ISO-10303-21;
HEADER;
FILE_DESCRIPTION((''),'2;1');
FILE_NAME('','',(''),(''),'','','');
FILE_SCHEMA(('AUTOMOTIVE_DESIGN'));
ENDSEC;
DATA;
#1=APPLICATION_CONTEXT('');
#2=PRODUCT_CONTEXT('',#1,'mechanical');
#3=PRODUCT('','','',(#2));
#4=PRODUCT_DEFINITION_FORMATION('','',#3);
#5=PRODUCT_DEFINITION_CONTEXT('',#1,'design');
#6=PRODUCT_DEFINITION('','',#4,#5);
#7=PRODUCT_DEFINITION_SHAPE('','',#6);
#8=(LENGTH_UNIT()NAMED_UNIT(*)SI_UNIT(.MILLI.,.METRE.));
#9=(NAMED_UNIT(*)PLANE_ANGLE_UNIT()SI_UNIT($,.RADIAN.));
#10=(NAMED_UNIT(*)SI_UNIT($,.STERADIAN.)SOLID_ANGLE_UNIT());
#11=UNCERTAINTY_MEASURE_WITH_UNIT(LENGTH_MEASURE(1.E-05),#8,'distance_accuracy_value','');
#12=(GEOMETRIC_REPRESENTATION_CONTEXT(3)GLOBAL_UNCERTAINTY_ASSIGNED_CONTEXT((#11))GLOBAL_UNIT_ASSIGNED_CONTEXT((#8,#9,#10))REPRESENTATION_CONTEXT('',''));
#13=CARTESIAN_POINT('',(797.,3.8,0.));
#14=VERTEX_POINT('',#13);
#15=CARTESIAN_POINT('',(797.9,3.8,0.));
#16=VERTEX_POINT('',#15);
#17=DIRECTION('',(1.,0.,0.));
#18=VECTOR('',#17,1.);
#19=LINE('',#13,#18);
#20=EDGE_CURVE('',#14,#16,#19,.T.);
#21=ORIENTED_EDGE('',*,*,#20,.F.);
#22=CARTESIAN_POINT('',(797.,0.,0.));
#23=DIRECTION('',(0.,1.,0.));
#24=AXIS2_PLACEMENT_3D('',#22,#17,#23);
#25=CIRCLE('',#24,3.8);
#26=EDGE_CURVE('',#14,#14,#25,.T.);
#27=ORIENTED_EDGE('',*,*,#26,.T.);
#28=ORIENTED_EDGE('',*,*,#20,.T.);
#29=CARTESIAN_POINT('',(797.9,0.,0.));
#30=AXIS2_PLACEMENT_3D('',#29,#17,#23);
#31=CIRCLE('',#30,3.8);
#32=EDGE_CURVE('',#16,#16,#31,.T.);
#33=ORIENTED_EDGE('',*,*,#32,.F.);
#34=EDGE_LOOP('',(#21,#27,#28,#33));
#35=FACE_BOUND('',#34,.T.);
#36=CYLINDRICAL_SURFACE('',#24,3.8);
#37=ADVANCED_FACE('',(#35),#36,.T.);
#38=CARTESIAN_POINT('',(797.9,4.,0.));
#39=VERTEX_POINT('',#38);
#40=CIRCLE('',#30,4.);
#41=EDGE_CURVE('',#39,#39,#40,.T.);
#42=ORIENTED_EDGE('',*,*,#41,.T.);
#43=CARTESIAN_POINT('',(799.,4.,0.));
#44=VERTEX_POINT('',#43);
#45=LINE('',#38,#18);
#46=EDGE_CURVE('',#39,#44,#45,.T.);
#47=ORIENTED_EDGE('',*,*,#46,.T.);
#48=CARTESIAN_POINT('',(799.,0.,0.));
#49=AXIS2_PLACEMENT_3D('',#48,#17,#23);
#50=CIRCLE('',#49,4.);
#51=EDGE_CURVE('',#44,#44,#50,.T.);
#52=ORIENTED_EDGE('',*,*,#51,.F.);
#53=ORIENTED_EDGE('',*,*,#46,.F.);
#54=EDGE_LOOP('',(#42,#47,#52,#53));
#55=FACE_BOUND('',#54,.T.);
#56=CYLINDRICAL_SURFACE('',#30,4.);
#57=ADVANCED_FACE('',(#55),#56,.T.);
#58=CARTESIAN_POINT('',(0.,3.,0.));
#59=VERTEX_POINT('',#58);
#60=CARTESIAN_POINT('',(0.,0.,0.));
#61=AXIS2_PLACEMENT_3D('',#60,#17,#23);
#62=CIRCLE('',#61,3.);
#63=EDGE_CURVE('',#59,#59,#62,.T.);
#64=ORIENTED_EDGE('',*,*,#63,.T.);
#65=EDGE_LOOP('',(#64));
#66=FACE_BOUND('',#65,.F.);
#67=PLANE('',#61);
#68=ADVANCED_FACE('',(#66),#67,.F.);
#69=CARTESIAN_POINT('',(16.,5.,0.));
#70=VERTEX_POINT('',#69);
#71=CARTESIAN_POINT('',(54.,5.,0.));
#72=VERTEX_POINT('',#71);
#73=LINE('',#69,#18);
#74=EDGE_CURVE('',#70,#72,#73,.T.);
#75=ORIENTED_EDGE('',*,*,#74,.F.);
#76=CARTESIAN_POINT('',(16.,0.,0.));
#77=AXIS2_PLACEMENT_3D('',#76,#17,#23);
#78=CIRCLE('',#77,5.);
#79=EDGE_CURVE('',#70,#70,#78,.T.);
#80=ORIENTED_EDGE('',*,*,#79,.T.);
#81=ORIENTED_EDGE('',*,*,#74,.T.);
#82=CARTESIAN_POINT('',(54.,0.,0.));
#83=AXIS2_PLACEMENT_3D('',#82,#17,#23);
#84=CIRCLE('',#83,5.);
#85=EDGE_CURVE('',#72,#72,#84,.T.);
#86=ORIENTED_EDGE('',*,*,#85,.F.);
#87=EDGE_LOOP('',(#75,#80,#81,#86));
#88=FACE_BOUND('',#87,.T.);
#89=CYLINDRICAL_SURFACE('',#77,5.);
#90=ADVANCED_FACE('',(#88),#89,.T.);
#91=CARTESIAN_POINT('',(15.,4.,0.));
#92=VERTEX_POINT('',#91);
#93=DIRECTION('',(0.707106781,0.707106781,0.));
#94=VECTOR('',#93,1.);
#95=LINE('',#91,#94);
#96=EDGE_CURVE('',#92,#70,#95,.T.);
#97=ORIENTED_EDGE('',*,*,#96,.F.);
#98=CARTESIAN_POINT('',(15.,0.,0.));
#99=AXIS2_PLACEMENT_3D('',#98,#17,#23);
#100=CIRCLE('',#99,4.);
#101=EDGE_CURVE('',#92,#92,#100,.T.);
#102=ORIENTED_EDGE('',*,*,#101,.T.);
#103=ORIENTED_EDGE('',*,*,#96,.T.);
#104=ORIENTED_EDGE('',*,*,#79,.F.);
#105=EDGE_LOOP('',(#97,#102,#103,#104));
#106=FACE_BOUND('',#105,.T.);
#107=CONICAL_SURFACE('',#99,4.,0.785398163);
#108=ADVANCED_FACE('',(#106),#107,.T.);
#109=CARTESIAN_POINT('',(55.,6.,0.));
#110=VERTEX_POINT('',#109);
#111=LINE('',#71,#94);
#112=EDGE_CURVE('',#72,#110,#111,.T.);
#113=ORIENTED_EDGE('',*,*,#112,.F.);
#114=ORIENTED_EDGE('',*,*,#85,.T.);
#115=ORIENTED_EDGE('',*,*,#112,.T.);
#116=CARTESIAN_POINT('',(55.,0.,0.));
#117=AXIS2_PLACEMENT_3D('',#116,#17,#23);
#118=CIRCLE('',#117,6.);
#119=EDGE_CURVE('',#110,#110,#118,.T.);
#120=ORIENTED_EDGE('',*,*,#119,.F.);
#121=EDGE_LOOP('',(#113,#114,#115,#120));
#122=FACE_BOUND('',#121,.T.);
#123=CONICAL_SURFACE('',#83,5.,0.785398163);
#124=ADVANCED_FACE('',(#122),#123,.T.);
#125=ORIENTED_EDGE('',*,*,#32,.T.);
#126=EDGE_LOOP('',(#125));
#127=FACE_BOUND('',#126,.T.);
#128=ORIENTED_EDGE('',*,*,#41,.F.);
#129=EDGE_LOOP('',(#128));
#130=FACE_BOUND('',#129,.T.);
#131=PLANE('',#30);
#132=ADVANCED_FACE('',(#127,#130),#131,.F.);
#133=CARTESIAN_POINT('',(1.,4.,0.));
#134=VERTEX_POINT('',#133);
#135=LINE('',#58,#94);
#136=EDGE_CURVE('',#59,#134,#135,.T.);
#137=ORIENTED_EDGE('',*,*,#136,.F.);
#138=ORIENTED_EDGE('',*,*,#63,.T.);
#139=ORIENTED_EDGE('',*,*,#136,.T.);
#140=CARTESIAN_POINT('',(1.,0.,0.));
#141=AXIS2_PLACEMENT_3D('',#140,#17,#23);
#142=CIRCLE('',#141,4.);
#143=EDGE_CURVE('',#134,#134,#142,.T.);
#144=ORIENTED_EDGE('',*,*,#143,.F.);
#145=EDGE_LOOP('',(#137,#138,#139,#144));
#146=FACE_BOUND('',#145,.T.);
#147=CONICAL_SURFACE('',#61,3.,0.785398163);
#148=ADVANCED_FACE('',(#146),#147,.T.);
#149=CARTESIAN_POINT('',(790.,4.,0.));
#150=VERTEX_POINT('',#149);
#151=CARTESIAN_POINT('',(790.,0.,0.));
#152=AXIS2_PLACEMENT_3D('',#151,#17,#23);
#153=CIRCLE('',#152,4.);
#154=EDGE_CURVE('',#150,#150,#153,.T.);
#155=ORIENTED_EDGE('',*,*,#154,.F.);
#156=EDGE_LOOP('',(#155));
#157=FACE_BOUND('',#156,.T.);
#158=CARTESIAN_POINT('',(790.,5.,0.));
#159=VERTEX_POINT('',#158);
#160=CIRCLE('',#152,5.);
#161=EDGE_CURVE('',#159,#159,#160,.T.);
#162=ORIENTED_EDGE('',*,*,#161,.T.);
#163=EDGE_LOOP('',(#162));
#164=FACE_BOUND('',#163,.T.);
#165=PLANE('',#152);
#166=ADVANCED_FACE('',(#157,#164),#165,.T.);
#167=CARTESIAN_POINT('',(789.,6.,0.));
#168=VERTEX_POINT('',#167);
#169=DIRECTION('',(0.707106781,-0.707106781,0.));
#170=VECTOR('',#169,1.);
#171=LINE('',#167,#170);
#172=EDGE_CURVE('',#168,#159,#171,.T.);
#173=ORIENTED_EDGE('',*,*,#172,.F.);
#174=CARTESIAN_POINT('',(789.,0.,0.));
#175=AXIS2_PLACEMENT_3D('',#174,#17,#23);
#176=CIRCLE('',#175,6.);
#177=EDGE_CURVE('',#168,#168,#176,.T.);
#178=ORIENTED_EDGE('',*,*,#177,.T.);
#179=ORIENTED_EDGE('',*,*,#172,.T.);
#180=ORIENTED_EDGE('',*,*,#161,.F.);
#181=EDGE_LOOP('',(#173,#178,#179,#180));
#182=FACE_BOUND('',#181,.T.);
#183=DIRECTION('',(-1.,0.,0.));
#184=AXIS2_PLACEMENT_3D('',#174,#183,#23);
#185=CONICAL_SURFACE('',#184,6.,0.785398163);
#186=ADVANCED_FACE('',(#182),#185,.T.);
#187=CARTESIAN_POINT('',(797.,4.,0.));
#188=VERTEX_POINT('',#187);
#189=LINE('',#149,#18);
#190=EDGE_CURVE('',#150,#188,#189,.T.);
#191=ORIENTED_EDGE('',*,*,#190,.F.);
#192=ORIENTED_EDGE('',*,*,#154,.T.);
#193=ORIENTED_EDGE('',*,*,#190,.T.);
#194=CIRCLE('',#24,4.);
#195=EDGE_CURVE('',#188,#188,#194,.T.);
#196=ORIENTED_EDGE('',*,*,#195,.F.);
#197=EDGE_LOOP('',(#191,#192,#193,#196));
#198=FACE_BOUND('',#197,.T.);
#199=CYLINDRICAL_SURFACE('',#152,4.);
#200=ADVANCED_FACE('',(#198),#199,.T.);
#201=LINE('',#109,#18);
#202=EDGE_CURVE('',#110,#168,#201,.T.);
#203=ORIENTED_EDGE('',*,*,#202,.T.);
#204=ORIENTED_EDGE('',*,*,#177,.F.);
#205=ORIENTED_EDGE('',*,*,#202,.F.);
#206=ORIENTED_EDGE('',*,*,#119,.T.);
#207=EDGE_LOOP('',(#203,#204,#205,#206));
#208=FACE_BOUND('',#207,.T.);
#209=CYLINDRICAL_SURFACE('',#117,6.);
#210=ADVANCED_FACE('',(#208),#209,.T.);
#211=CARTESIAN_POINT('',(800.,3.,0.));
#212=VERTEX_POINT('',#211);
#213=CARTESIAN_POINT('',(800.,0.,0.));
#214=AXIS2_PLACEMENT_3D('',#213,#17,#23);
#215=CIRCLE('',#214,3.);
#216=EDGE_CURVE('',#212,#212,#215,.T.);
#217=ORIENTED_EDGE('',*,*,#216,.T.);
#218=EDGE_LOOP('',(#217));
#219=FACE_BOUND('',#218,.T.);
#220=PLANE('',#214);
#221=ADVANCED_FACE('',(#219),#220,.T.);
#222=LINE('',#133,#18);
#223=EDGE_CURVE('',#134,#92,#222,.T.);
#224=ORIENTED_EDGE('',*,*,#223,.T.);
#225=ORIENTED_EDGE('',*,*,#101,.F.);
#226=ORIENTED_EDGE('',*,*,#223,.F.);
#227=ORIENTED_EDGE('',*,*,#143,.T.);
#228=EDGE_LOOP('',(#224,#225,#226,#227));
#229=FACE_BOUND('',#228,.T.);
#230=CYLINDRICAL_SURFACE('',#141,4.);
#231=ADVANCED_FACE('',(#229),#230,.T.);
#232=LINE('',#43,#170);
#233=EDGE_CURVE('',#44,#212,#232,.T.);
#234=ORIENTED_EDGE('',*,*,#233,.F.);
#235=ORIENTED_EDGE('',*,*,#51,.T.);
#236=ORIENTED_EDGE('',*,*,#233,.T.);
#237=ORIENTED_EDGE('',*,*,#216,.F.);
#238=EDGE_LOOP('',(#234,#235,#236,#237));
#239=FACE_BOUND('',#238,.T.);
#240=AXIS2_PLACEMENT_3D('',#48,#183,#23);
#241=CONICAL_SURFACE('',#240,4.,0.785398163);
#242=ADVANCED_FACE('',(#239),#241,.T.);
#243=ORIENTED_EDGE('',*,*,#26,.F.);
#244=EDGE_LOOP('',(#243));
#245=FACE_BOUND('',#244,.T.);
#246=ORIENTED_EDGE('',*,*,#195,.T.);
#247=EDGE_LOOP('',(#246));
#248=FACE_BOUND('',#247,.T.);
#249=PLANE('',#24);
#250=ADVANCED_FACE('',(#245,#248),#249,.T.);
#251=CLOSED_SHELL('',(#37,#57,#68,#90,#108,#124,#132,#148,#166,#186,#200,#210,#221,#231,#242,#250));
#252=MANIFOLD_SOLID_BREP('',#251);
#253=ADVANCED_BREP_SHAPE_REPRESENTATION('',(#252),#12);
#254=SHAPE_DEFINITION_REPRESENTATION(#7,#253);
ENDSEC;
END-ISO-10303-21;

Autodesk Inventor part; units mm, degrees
ref_plane "YZ Plane" through (0, 0, 0) normal (1, 0, 0) x (0, 1, 0)
ref_plane "XZ Plane" through (0, 0, 0) normal (0, 1, 0) x (-1, 0, 0)
ref_plane "XY Plane" through (0, 0, 0) normal (0, 0, 1) x (1, 0, 0)
sketch "Sketch1" plane through (0, 0, 0) normal (0, 0, 1) x (1, 0, 0)
  line L0 (0, 4) -> (1, 4) construction
  line L1 (15, 4) -> (16, 5)
  line L2 (16, 5) -> (54, 5)
  line L3 (0, 4) -> (0, 3) construction
  line L4 (54, 5) -> (55, 6)
  line L5 (55, 6) -> (789, 6)
  line L6 (0, 3) -> (1, 4)
  line L7 (0, 3) -> (0, 0)
  line L8 (1, 4) -> (15, 4)
  line L9 (789, 6) -> (790, 5)
  line L10 (790, 5) -> (790, 4)
  line L11 (790, 4) -> (797, 4)
  line L12 (797, 4) -> (797, 3.8)
  line L13 (797, 3.8) -> (797.9, 3.8)
  line L14 (797.9, 3.8) -> (797.9, 4)
  line L15 (797.9, 4) -> (799, 4)
  line L16 (799, 4) -> (800, 3)
  line L17 (800, 3) -> (800, 0)
  line L18 (0, 0) -> (800, 0)
  point P0 (0, 0)
  point P1 (800, 1.5)
  dimension "d0" = 4
  dimension "d1" = 5
  dimension "d2" = 6
  dimension "d3" = 135
  dimension "d4" = 135
  dimension "d5" = 15
  dimension "d6" = 39
  dimension "d7" = 135
  dimension "d8" = 4
  dimension "d9" = 7
  dimension "d10" = 10
  dimension "d11" = 0.2
  dimension "d12" = 0.9
  dimension "d14" = 135
  dimension "d15" = 800
revolve "Revolution1" add sketch "Sketch1" angle 360 about axis through (0, 0, 0) along (1, 0, 0)
equation "\"d15\" = SHAFT_LEN"
equation "\"SHAFT_LEN\" = 800"
properties part number "SFU1204-800"
